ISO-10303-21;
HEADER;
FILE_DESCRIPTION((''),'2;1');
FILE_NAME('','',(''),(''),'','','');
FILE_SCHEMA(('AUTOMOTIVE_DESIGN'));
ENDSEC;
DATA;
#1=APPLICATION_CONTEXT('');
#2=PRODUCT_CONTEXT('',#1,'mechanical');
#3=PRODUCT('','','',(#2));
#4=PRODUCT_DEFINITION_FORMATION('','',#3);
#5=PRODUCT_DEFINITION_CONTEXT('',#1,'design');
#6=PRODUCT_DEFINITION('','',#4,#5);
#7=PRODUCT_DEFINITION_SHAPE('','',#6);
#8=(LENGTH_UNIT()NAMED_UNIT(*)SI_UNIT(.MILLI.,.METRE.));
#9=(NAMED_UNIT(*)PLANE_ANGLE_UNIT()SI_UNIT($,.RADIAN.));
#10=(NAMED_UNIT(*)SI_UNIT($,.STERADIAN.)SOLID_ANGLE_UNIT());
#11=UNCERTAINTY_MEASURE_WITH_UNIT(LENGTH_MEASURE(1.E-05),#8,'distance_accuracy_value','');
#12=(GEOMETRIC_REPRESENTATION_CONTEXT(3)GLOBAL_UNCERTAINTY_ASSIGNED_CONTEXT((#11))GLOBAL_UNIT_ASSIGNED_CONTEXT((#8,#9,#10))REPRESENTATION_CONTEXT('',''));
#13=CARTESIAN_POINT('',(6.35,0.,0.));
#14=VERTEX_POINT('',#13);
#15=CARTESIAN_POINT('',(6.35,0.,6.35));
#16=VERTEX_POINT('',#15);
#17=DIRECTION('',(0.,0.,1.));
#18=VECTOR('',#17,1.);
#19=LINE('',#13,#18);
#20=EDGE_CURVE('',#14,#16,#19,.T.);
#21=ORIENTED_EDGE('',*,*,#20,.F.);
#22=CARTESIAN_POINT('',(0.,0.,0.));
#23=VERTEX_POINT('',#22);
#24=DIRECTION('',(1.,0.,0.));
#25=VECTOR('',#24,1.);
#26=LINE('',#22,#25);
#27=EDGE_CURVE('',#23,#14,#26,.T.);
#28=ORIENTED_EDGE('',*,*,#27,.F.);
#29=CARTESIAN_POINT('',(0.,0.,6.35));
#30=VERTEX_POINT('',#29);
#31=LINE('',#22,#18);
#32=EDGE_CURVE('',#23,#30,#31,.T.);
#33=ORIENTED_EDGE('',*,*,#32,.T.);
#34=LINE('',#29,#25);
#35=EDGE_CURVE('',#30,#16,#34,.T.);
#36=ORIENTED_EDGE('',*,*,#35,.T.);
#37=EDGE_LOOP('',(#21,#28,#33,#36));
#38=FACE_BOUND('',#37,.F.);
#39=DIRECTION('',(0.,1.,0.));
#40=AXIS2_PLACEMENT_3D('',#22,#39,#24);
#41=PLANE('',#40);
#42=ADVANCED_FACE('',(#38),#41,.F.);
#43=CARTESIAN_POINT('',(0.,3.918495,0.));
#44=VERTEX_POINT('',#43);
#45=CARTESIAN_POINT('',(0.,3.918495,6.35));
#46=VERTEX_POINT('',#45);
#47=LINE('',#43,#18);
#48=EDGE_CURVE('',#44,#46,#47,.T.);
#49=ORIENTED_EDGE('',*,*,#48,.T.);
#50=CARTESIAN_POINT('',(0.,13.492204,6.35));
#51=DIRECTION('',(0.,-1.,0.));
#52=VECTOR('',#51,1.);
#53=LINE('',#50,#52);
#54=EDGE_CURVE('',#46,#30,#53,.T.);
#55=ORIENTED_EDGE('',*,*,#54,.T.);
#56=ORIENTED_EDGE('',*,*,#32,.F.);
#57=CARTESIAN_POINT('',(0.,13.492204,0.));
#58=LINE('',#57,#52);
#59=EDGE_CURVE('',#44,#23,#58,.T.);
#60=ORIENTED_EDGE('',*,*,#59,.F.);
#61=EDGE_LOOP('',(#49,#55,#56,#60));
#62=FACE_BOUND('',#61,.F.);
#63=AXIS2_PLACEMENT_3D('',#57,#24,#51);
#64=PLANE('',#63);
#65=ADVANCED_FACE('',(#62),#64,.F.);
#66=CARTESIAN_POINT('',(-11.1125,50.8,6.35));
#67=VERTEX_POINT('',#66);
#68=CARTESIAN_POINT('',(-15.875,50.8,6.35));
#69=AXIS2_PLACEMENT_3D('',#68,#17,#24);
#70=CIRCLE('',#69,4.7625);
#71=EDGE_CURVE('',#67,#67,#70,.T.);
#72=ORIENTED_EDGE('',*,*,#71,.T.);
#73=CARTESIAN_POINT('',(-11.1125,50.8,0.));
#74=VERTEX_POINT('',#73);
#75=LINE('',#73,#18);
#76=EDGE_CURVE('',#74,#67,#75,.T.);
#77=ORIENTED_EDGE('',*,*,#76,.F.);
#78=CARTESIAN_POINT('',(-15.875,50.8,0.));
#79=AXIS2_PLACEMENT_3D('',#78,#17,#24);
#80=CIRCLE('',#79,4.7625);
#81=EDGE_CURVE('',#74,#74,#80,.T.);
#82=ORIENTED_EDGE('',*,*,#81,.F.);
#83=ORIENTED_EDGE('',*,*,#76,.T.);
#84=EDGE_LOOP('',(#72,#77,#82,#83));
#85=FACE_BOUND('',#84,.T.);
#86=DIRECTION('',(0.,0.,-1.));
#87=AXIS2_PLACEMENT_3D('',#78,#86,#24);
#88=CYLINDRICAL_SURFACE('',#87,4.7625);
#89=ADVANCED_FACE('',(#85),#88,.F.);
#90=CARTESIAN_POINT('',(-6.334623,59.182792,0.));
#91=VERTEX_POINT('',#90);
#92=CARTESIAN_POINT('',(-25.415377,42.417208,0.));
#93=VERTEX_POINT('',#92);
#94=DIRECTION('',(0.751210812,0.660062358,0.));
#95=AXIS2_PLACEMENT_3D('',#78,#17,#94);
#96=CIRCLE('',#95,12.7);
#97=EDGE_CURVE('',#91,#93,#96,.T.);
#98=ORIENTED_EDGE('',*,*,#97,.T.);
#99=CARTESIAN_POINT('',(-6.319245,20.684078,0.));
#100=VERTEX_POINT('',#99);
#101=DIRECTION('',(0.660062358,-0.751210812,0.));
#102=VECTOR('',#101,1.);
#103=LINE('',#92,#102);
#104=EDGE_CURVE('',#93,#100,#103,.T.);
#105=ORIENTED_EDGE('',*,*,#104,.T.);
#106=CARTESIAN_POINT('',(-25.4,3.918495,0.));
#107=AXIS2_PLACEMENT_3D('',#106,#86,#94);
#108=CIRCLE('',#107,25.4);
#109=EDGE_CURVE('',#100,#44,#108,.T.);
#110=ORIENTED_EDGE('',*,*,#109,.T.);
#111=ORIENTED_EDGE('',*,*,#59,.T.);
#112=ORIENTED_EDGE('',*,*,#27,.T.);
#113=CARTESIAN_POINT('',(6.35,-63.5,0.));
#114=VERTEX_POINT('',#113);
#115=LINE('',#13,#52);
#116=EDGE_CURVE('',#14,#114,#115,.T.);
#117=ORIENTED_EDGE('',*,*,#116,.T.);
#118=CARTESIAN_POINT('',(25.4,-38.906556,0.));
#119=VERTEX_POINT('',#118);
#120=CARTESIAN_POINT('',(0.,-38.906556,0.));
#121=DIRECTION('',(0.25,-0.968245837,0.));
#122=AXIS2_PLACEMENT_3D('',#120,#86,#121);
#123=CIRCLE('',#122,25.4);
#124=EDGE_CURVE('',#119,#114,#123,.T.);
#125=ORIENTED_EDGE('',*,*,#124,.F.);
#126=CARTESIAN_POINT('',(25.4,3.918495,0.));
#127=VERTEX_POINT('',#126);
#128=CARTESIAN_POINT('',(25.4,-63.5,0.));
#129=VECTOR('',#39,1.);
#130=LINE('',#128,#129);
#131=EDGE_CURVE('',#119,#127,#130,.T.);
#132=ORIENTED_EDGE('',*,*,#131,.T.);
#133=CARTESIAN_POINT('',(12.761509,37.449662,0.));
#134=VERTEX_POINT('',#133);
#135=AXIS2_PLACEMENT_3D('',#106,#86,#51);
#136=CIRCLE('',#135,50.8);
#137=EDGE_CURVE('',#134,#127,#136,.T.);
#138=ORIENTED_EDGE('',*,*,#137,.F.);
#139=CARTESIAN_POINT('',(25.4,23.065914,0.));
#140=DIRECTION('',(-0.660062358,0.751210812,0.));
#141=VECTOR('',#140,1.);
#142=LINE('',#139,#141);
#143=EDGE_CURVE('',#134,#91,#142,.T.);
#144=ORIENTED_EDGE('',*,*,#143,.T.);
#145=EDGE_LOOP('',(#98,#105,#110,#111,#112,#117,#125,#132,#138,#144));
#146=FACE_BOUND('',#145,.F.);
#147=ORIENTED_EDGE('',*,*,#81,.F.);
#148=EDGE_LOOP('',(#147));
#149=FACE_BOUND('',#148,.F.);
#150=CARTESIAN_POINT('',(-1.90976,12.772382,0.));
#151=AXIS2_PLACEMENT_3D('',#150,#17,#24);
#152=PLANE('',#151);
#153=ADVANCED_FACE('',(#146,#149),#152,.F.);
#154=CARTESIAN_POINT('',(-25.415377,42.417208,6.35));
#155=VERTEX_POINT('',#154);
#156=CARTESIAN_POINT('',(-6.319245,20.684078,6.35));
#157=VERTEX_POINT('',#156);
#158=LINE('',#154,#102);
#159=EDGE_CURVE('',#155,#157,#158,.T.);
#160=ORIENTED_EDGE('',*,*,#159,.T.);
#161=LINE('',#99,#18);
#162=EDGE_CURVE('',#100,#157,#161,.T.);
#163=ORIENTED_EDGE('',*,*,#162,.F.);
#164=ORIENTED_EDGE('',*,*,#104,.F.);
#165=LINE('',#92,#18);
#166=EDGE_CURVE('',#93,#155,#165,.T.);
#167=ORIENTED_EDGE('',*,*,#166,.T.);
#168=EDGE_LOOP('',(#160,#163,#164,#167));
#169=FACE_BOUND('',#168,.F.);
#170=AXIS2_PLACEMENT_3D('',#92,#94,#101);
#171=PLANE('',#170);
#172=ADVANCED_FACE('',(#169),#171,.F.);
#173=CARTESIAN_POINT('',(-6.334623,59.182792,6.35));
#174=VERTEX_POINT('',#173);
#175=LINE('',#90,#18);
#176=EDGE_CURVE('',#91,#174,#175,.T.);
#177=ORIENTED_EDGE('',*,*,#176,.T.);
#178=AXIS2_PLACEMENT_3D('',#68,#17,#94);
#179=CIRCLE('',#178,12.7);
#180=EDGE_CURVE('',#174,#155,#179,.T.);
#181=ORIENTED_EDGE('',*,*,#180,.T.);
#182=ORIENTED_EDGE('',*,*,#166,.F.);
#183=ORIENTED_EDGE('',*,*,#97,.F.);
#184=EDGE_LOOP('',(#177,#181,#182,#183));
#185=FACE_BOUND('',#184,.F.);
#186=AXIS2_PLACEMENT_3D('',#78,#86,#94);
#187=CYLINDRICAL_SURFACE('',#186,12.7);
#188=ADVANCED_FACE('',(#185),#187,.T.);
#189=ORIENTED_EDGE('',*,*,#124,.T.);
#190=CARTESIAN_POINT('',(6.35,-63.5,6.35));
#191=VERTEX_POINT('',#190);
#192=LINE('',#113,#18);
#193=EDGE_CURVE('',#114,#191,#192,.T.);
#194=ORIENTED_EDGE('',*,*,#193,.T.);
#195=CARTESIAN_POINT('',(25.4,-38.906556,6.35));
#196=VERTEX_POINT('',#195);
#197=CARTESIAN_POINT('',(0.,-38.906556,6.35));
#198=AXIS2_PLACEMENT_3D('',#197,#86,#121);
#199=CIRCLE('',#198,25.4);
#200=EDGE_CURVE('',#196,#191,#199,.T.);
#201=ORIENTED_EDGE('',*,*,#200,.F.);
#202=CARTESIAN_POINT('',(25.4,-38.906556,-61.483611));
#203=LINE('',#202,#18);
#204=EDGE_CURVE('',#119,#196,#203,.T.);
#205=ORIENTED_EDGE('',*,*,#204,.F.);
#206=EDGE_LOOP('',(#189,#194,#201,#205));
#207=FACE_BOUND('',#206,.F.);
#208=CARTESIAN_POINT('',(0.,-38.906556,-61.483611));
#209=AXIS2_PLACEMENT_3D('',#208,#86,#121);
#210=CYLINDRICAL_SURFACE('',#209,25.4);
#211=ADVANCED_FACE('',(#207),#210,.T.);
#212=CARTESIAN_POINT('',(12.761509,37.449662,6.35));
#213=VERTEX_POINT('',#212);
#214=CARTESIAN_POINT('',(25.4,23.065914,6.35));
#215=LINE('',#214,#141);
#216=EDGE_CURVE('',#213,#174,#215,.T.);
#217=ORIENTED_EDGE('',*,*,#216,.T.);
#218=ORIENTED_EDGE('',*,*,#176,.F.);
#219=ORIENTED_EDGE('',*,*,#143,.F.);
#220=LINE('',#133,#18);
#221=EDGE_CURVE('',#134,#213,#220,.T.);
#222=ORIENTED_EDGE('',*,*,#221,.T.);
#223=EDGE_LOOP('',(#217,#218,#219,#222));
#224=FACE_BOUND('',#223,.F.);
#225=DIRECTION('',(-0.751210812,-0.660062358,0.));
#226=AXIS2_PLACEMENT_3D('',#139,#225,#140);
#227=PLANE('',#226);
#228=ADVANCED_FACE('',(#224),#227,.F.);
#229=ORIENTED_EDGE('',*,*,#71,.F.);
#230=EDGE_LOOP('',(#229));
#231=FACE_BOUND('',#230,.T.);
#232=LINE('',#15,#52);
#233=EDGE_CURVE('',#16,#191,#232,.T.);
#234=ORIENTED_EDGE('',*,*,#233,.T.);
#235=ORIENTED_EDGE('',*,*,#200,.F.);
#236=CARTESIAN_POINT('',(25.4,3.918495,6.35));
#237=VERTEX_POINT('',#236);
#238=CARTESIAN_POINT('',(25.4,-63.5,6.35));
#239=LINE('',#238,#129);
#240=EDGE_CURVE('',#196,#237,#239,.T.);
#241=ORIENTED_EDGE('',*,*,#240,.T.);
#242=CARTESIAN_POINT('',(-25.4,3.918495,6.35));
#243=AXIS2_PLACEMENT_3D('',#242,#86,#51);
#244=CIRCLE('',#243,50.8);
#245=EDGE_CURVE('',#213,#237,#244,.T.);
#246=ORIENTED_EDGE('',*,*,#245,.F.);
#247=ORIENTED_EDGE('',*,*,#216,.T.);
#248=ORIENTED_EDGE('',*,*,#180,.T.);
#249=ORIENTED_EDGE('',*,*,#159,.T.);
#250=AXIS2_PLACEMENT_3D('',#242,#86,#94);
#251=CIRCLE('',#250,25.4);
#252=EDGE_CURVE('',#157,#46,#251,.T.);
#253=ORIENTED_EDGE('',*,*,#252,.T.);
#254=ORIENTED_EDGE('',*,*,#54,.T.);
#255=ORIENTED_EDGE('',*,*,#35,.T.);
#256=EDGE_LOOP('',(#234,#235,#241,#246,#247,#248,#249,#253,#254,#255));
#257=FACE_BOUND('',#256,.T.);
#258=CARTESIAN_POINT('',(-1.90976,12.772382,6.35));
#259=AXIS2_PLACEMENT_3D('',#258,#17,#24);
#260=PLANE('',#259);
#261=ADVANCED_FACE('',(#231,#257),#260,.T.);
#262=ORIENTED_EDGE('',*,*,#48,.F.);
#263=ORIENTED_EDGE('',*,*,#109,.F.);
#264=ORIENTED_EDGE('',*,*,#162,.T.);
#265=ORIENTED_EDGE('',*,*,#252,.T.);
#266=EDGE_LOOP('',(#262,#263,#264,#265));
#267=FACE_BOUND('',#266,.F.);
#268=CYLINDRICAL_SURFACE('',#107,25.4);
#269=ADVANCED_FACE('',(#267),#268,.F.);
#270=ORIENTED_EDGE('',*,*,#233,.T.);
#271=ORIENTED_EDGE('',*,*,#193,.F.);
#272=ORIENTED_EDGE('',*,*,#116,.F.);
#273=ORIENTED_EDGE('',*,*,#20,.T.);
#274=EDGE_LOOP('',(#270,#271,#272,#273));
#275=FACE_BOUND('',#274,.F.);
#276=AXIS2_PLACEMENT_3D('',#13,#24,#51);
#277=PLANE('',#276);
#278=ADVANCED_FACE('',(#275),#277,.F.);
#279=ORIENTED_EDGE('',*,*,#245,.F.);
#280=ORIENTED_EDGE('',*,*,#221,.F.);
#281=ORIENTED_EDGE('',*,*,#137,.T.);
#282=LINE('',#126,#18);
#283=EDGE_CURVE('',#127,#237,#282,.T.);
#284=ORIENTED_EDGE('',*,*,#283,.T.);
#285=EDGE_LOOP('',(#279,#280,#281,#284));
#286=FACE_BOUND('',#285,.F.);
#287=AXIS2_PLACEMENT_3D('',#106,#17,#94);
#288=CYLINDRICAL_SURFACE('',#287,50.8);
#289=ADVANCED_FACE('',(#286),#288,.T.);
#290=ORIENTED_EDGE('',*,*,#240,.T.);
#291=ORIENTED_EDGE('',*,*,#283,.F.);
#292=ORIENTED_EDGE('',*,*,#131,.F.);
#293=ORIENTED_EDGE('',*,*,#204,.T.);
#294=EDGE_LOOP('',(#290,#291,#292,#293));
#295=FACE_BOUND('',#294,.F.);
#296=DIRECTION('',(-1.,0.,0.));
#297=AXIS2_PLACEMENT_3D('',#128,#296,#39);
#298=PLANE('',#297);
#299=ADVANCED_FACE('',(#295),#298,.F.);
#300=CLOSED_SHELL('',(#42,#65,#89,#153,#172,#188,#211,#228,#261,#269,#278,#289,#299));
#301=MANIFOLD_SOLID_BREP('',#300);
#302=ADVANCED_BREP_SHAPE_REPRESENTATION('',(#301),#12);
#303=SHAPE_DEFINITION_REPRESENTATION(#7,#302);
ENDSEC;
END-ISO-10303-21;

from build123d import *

# Parameters (mm, degrees)
F0_R        = 4.7625
F1_DEPTH    = 6.35
F2_T1_DEPTH = 6.35
F2_T3_DEPTH = 129.3172212421
F3_R        = 50.8


# Not quite as in the source:
# - a fillet or chamfer that OpenCascade refuses, or shapes differently, is made with other operations: its cross-section is extruded or revolved along the edge and cut away or added


with BuildPart() as f1:
    # F0 (on Top) → F1 (new body)
    with BuildSketch(Plane.XY):
        with BuildLine():
            Line((25.4, -63.5), (25.4, 23.0659139254))
            Line((25.4, 23.0659139254), (-6.3346226919, 59.1827919466))
            ThreePointArc((-6.3346226919, 59.1827919466), (-24.2577919466, 60.3403773081), (-25.4153773081, 42.4172080534))
            Line((-25.4153773081, 42.4172080534), (0, 13.4922042489))
            Line((0, 13.4922042489), (0, 0))
            Line((0, 0), (6.35, 0))
            Line((6.35, 0), (6.35, -63.5))
            Line((6.35, -63.5), (25.4, -63.5))
        make_face()
        with Locations((-15.875, 50.8)):
            Circle(F0_R, mode=Mode.SUBTRACT)
    extrude(amount=F1_DEPTH)

    # F2: fillet of radius 25.4 on 2 edges, made by hand

    # F2_s2 → F2_t1 (join)
    with BuildSketch(Plane.XY):
        with BuildLine():
            ThreePointArc((-6.3192453838, 20.6840784656), (-1.6322574983, 12.8769775006), (0, 3.9184945725))
            Line((0, 3.9184945725), (0, 13.4922042489))
            Line((0, 13.4922042489), (-6.3192453838, 20.6840784656))
        make_face()
    extrude(amount=F2_T1_DEPTH)

    # F2_s4 → F2_t3 (cut)
    with BuildSketch(Plane.XY.offset(-61.483610621)):
        with BuildLine():
            ThreePointArc((6.35, -63.5), (20.0804631421, -54.4608156183), (25.4, -38.9065557516))
            Line((25.4, -38.9065557516), (25.4, -63.5))
            Line((25.4, -63.5), (6.35, -63.5))
        make_face()
    extrude(amount=F2_T3_DEPTH, mode=Mode.SUBTRACT)

    # F3
    f3_edges = [f1.edges().sort_by_distance(p)[0] for p in [
        (25.4, 23.065914, 3.175),
    ]]
    fillet(f3_edges, radius=F3_R)


solid = f1.part
